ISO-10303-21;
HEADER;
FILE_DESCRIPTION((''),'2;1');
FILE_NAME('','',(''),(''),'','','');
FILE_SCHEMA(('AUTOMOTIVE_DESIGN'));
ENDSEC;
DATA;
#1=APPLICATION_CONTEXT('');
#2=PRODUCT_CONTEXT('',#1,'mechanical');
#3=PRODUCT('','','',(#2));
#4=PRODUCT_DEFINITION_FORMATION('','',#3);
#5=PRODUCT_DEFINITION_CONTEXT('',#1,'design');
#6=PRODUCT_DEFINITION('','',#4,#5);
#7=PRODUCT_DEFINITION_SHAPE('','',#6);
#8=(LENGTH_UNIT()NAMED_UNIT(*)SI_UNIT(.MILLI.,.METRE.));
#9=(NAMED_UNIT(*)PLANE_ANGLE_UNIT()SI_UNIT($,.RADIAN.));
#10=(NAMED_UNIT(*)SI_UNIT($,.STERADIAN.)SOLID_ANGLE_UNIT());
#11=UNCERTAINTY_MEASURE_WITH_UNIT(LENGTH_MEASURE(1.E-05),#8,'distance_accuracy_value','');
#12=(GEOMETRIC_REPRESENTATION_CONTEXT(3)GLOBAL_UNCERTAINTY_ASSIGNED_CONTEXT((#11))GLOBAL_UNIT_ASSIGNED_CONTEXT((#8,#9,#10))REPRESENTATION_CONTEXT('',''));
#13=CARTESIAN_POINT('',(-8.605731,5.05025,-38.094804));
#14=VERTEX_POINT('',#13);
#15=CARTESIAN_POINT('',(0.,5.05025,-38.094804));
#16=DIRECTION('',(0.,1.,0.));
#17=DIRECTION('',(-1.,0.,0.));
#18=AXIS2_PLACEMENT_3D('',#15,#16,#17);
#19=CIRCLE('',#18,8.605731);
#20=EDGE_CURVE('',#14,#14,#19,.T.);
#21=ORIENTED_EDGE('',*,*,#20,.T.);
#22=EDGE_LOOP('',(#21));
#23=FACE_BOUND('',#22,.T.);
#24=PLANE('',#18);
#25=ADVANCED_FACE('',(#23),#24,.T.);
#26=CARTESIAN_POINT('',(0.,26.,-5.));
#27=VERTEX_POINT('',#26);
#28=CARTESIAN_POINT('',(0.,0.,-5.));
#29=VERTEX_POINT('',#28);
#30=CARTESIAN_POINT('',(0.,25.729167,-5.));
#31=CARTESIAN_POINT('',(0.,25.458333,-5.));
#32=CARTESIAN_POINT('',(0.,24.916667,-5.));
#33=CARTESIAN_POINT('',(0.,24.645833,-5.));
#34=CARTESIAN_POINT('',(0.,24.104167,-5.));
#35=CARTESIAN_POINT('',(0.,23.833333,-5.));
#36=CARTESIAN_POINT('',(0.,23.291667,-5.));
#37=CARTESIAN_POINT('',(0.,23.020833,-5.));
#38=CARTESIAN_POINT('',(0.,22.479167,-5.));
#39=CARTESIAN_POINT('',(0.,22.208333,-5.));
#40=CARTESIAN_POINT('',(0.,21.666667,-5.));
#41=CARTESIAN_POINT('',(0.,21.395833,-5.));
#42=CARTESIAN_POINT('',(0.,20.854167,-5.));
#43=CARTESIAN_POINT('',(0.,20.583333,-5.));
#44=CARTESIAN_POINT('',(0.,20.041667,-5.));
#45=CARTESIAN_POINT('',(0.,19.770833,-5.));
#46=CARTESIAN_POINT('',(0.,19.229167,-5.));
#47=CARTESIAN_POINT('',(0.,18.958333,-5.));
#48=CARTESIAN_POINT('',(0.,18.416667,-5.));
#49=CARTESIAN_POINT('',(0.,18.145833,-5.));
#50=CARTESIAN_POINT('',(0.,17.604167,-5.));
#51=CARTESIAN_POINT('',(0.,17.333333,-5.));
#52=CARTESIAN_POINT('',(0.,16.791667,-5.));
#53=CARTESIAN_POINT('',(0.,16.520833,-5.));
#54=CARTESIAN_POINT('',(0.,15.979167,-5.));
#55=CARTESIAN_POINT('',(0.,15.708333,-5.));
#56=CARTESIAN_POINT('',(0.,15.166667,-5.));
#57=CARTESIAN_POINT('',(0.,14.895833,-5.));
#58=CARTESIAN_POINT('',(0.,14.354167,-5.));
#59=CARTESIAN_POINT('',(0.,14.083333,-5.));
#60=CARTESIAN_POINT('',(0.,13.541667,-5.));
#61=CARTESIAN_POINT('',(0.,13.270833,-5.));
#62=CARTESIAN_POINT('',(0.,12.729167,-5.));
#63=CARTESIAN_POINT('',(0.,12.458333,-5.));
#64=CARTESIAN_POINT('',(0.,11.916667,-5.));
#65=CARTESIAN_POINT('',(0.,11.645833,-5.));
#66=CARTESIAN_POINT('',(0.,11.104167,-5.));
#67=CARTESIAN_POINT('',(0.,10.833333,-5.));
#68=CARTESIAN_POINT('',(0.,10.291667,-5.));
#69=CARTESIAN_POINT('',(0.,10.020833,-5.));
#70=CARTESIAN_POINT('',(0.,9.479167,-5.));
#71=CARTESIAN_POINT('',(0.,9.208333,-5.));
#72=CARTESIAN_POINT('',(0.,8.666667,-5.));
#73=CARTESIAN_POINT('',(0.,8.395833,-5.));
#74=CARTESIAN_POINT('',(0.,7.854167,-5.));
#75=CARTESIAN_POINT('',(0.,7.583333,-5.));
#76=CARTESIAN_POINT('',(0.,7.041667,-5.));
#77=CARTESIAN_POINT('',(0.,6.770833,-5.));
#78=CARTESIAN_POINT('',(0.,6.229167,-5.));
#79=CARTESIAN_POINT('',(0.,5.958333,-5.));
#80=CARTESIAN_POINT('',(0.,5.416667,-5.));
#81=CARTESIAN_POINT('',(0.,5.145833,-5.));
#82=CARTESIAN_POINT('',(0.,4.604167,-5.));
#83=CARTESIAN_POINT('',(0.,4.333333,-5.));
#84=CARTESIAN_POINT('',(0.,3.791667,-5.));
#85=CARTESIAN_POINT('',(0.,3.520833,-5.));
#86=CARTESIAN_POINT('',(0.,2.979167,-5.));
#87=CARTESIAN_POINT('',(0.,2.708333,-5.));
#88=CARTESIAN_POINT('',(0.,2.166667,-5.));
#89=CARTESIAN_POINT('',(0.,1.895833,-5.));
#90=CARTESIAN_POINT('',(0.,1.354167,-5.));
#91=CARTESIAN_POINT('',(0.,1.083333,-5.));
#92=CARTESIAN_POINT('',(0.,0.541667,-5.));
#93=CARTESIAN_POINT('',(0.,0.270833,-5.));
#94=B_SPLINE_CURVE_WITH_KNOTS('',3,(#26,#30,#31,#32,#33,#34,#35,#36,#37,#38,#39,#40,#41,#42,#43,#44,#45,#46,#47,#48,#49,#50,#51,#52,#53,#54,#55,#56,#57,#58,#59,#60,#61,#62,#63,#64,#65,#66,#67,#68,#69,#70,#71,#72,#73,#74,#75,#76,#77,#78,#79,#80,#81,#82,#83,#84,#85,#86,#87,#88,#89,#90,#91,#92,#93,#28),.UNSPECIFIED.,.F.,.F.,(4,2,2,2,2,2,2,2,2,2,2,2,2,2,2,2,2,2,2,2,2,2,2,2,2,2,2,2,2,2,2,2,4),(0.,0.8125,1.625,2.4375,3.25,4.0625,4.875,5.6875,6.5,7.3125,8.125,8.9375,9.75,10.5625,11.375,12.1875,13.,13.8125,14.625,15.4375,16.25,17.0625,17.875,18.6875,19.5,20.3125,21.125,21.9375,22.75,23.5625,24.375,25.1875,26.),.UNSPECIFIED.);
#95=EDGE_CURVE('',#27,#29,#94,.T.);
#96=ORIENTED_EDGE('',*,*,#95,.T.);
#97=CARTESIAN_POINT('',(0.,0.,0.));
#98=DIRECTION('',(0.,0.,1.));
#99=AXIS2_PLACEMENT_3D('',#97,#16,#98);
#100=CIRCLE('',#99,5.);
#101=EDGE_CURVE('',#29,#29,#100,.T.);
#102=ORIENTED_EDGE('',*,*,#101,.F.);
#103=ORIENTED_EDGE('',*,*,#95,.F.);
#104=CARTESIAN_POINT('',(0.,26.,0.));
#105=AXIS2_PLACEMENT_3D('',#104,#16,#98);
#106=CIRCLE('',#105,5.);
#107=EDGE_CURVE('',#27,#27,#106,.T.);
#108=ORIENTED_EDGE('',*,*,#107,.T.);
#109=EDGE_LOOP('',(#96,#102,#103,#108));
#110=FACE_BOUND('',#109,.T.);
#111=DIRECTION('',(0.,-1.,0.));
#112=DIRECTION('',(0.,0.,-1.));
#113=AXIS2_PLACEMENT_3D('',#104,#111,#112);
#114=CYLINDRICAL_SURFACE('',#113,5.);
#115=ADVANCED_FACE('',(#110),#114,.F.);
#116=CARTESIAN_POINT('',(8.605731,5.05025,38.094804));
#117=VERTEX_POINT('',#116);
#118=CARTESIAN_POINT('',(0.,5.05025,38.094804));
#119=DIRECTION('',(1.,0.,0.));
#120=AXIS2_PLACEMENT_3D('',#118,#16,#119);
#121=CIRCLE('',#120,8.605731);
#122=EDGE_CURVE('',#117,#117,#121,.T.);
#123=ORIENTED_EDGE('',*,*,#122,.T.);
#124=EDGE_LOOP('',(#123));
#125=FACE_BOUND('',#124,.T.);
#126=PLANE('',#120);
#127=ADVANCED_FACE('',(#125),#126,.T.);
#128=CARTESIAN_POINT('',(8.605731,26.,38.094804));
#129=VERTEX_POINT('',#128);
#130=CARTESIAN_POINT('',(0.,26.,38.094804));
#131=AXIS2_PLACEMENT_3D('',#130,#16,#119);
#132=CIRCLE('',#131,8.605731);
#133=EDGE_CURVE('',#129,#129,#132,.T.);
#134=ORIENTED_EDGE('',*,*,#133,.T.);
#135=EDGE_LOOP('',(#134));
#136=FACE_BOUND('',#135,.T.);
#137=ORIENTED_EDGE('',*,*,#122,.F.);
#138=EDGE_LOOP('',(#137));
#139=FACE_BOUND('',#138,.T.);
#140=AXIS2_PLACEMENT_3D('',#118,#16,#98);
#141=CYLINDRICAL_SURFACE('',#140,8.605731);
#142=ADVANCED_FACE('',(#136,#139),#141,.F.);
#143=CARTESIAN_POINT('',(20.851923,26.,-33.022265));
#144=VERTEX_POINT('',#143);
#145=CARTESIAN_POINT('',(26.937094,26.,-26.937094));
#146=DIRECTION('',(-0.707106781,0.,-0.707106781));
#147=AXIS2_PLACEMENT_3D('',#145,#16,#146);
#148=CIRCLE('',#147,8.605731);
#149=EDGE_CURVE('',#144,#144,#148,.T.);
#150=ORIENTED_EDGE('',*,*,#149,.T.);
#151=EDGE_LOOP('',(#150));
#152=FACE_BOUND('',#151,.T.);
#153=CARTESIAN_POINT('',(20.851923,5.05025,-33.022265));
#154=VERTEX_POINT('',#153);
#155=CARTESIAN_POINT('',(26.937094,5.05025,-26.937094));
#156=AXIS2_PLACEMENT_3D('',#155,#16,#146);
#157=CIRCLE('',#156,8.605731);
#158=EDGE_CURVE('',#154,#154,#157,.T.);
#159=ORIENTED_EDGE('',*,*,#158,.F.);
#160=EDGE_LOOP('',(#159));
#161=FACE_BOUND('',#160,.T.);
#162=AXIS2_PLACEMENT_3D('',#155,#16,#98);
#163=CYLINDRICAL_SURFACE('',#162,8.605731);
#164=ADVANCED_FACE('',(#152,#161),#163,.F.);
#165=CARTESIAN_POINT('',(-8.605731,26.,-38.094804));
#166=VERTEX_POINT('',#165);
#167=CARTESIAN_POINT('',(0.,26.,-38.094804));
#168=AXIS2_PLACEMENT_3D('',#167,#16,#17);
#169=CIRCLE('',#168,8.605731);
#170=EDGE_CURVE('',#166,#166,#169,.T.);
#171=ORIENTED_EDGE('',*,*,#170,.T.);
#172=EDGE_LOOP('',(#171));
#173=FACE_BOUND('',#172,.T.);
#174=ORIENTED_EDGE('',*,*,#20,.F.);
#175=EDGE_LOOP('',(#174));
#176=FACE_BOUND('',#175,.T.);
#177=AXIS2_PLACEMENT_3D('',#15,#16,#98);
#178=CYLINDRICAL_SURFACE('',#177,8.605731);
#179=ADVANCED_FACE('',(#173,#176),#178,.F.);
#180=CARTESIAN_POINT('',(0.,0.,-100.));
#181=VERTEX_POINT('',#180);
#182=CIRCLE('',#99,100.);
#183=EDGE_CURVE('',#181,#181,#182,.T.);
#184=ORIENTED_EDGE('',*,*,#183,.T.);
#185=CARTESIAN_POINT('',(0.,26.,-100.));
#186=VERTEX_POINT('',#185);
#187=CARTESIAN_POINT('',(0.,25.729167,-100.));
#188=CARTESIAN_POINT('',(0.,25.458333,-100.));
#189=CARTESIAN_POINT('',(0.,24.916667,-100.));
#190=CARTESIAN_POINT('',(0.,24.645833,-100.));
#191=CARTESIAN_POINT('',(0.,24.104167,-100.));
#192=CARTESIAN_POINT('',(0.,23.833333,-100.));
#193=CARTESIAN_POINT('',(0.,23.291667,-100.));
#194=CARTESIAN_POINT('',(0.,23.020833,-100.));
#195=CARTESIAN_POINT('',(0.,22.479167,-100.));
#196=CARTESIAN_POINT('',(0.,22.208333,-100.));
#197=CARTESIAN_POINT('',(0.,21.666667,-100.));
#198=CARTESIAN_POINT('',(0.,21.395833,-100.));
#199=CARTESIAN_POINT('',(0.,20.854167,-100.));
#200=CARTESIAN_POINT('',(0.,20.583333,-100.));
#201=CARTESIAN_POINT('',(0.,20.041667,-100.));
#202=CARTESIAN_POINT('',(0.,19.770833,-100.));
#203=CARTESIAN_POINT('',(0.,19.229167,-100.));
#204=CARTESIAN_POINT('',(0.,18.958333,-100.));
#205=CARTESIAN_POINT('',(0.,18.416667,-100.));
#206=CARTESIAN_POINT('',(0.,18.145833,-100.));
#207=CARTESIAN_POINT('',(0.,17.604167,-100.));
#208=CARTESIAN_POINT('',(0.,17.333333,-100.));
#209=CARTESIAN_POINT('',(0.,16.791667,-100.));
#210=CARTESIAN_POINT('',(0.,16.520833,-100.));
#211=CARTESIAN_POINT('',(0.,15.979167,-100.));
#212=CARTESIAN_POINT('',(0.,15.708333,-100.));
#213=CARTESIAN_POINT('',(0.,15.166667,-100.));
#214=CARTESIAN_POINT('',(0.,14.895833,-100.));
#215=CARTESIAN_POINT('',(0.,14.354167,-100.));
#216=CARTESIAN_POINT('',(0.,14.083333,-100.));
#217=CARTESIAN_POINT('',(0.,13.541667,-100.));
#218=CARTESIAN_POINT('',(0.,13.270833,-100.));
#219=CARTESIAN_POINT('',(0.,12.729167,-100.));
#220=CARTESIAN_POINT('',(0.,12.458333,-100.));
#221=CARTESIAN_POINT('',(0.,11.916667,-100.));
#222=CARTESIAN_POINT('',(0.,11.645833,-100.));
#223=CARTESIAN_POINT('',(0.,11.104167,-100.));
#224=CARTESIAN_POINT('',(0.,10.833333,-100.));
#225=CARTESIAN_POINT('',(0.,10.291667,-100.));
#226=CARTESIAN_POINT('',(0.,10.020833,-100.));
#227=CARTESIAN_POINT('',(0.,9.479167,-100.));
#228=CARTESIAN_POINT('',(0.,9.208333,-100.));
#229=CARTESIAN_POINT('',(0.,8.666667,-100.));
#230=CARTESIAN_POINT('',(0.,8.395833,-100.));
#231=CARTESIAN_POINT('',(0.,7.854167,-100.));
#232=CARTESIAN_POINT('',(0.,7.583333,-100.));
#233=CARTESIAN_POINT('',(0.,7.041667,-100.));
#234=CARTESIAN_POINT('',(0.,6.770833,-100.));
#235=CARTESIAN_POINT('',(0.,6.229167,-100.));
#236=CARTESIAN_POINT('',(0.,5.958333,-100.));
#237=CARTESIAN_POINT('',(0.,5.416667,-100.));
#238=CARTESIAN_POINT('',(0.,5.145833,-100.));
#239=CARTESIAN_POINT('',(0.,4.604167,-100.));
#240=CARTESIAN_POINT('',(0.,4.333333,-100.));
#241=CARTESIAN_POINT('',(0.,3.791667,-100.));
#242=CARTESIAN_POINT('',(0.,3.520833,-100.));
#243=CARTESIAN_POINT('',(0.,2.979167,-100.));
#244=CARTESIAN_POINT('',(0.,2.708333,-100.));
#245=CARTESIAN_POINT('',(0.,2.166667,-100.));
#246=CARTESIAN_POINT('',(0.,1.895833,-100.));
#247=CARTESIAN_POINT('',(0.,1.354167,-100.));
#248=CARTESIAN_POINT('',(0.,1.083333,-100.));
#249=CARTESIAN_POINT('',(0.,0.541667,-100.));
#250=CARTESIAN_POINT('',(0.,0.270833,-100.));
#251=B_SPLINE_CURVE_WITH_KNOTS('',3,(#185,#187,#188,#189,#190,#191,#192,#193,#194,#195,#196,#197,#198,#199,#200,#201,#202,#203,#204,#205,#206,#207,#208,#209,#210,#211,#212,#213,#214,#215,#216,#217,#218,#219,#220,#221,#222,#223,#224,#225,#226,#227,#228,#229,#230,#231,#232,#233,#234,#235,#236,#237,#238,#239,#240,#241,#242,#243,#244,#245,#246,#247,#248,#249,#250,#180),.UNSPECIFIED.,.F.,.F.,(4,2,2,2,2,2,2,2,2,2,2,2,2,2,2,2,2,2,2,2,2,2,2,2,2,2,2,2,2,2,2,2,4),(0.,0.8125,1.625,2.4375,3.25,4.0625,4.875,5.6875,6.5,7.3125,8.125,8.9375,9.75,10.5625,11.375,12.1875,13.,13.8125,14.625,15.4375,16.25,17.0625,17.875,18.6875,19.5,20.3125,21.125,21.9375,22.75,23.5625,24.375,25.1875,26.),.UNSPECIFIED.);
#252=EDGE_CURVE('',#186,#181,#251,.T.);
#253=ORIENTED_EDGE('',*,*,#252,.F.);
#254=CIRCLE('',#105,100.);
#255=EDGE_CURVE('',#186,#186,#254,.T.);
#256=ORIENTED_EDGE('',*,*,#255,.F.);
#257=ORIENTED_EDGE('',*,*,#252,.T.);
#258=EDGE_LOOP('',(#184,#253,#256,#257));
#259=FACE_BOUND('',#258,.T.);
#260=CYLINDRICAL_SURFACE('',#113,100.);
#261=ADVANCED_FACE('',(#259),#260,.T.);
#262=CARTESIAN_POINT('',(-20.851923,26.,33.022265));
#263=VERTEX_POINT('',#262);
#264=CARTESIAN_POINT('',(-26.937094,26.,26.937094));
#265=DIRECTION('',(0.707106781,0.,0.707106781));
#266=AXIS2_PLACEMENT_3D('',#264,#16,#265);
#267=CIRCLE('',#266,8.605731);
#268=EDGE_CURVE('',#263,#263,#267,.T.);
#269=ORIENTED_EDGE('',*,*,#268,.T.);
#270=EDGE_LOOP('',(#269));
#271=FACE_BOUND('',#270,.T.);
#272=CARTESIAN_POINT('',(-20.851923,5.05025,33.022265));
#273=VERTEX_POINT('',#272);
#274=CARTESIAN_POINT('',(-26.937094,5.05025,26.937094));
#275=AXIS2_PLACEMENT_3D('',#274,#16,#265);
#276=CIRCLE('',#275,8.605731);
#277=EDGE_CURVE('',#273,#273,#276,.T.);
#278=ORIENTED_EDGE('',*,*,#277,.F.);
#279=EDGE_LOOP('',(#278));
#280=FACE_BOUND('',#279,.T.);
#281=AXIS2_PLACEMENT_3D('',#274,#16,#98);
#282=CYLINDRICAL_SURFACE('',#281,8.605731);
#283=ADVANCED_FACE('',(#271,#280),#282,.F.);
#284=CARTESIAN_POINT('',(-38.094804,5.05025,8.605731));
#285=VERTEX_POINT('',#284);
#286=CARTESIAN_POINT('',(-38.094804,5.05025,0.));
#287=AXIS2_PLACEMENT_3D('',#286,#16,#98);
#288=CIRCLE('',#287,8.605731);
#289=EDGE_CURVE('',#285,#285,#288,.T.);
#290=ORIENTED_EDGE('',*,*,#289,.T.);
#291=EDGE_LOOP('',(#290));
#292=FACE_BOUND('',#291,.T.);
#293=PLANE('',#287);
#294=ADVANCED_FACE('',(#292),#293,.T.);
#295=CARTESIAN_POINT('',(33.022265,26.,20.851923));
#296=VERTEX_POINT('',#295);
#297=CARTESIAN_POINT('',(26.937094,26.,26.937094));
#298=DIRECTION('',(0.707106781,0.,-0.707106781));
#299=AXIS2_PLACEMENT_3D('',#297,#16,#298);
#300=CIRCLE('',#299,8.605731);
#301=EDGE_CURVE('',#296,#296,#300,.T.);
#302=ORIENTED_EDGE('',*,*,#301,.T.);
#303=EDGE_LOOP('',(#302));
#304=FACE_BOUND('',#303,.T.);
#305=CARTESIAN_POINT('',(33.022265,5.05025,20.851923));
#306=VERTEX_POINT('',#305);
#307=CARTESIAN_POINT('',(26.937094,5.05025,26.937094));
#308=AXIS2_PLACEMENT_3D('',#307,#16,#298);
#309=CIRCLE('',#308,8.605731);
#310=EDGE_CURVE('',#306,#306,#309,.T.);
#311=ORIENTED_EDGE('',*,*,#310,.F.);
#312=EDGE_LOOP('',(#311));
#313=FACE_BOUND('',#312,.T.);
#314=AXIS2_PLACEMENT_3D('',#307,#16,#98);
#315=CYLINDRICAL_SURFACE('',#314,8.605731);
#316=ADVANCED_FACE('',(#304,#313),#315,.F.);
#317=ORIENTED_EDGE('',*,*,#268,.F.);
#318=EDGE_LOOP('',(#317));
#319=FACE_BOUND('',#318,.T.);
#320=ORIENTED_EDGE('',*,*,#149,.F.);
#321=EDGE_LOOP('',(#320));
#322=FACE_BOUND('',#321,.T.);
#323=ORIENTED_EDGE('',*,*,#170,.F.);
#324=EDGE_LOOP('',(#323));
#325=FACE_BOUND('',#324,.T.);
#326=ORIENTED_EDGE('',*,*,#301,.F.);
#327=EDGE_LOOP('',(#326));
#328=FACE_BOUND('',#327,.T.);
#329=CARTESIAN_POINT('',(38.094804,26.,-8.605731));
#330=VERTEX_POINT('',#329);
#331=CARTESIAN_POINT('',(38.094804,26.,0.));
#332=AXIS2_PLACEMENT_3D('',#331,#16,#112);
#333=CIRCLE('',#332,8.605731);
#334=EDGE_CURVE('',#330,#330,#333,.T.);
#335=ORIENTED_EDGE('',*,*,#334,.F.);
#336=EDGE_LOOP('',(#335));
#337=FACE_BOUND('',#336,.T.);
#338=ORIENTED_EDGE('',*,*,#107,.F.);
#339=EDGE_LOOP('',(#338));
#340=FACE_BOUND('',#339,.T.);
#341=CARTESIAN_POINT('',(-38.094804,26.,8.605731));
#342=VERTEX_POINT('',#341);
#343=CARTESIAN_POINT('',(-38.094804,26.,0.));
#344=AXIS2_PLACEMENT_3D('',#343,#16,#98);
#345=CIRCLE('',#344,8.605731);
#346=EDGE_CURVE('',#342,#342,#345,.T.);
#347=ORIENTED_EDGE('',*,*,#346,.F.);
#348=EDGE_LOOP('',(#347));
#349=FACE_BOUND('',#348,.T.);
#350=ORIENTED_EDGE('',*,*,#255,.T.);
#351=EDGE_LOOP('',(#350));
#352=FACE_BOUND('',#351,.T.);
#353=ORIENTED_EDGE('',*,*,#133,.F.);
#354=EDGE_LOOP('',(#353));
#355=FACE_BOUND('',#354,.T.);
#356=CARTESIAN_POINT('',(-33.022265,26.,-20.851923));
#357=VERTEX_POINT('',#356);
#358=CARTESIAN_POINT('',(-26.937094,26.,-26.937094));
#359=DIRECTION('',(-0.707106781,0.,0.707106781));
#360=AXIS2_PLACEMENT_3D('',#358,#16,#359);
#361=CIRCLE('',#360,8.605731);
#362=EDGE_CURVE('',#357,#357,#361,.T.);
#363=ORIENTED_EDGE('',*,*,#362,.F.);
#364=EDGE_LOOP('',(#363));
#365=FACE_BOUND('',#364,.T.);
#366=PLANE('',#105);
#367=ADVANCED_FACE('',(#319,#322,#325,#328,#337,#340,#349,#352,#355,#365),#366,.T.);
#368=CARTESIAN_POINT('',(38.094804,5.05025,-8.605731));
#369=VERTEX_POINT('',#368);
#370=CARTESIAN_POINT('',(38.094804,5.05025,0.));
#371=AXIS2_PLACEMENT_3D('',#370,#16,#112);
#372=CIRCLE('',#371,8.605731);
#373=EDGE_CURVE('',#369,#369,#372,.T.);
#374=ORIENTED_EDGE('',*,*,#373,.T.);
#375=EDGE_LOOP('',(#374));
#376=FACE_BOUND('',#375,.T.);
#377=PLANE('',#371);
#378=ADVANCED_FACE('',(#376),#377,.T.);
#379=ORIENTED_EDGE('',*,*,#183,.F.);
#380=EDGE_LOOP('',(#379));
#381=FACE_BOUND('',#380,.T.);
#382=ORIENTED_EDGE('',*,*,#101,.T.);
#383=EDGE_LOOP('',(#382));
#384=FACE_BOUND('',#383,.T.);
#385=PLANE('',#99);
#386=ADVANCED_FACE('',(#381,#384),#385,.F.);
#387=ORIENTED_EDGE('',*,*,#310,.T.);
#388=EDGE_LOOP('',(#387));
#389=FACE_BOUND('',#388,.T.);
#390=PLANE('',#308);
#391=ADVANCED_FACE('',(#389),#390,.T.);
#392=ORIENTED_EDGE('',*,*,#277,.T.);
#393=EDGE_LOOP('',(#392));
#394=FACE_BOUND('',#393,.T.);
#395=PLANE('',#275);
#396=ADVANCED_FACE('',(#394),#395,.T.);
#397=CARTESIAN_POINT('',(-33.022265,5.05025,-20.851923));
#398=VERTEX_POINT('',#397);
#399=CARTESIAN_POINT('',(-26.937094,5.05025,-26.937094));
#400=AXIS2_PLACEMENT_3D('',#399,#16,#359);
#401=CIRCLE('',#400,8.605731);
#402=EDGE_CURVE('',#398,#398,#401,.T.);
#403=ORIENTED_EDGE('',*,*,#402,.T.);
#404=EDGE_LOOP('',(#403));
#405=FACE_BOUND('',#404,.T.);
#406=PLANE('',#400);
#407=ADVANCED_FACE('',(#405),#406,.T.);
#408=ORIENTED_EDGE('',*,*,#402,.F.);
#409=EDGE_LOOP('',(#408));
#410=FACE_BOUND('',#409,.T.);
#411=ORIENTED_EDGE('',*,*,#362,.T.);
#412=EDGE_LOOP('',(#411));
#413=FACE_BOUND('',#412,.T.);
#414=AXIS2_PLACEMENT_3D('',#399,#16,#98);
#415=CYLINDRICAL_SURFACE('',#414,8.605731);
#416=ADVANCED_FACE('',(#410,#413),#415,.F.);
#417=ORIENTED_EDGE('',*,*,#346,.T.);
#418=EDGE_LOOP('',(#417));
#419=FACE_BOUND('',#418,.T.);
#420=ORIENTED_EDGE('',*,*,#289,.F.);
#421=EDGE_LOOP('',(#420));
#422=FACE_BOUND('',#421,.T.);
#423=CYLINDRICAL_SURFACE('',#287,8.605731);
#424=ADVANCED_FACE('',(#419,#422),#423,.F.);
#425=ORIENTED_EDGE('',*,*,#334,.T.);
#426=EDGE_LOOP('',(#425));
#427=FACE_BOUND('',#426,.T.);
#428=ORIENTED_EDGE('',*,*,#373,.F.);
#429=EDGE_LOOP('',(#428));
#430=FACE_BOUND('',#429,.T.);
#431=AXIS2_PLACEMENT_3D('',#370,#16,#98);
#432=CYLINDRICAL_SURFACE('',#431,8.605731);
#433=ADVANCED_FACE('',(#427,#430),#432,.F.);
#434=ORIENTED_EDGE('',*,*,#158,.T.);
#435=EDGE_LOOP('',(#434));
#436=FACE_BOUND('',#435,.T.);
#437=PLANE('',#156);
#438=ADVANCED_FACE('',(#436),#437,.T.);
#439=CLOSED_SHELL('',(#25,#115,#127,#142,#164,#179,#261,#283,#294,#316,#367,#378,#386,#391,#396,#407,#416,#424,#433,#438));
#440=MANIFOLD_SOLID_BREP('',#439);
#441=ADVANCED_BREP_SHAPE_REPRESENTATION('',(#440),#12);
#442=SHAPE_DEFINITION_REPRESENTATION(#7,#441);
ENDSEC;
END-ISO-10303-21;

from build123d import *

# Parameters (mm, degrees)
SKETCH1_R           = 100
BOSS_EXTRUDE1_DEPTH = 26
SKETCH2_R           = 5
CUT_EXTRUDE1_DEPTH  = 144.791515744
SKETCH3_R           = 8.605731223
CUT_EXTRUDE2_DEPTH  = 20.949750138
CIRPATTERN1_COUNT   = 8


with BuildPart() as part:
    # Sketch1 → Boss-Extrude1 (new body)
    with BuildSketch(Plane(origin=(0, 0, 0), x_dir=(1, 0, 0), z_dir=(0, 1, 0))):
        Circle(SKETCH1_R)
    extrude(amount=BOSS_EXTRUDE1_DEPTH)

    # Sketch2 → Cut-Extrude1 (cut, through all)
    with BuildSketch(Plane(origin=(0, 0, 0), x_dir=(1, 0, 0), z_dir=(0, 1, 0))):
        Circle(SKETCH2_R)
    extrude(amount=CUT_EXTRUDE1_DEPTH, mode=Mode.SUBTRACT)

    # Sketch3 → Cut-Extrude2 (cut)
    with BuildSketch(Plane(origin=(0, 26, 0), x_dir=(1, 0, 0), z_dir=(0, 1, 0))):
        with Locations((-38.094803889, 0)):
            Circle(SKETCH3_R)
    cut_extrude2 = extrude(amount=-CUT_EXTRUDE2_DEPTH, mode=Mode.SUBTRACT)

    # CirPattern1: Cut-Extrude2 ×8 about axis
    cirpattern1_axis = Axis((0, 0, 0), (0, 1, 0))
    for i in range(1, CIRPATTERN1_COUNT):
        add(cut_extrude2.rotate(cirpattern1_axis, i * 360 / CIRPATTERN1_COUNT), mode=Mode.SUBTRACT)


solid = part.part
